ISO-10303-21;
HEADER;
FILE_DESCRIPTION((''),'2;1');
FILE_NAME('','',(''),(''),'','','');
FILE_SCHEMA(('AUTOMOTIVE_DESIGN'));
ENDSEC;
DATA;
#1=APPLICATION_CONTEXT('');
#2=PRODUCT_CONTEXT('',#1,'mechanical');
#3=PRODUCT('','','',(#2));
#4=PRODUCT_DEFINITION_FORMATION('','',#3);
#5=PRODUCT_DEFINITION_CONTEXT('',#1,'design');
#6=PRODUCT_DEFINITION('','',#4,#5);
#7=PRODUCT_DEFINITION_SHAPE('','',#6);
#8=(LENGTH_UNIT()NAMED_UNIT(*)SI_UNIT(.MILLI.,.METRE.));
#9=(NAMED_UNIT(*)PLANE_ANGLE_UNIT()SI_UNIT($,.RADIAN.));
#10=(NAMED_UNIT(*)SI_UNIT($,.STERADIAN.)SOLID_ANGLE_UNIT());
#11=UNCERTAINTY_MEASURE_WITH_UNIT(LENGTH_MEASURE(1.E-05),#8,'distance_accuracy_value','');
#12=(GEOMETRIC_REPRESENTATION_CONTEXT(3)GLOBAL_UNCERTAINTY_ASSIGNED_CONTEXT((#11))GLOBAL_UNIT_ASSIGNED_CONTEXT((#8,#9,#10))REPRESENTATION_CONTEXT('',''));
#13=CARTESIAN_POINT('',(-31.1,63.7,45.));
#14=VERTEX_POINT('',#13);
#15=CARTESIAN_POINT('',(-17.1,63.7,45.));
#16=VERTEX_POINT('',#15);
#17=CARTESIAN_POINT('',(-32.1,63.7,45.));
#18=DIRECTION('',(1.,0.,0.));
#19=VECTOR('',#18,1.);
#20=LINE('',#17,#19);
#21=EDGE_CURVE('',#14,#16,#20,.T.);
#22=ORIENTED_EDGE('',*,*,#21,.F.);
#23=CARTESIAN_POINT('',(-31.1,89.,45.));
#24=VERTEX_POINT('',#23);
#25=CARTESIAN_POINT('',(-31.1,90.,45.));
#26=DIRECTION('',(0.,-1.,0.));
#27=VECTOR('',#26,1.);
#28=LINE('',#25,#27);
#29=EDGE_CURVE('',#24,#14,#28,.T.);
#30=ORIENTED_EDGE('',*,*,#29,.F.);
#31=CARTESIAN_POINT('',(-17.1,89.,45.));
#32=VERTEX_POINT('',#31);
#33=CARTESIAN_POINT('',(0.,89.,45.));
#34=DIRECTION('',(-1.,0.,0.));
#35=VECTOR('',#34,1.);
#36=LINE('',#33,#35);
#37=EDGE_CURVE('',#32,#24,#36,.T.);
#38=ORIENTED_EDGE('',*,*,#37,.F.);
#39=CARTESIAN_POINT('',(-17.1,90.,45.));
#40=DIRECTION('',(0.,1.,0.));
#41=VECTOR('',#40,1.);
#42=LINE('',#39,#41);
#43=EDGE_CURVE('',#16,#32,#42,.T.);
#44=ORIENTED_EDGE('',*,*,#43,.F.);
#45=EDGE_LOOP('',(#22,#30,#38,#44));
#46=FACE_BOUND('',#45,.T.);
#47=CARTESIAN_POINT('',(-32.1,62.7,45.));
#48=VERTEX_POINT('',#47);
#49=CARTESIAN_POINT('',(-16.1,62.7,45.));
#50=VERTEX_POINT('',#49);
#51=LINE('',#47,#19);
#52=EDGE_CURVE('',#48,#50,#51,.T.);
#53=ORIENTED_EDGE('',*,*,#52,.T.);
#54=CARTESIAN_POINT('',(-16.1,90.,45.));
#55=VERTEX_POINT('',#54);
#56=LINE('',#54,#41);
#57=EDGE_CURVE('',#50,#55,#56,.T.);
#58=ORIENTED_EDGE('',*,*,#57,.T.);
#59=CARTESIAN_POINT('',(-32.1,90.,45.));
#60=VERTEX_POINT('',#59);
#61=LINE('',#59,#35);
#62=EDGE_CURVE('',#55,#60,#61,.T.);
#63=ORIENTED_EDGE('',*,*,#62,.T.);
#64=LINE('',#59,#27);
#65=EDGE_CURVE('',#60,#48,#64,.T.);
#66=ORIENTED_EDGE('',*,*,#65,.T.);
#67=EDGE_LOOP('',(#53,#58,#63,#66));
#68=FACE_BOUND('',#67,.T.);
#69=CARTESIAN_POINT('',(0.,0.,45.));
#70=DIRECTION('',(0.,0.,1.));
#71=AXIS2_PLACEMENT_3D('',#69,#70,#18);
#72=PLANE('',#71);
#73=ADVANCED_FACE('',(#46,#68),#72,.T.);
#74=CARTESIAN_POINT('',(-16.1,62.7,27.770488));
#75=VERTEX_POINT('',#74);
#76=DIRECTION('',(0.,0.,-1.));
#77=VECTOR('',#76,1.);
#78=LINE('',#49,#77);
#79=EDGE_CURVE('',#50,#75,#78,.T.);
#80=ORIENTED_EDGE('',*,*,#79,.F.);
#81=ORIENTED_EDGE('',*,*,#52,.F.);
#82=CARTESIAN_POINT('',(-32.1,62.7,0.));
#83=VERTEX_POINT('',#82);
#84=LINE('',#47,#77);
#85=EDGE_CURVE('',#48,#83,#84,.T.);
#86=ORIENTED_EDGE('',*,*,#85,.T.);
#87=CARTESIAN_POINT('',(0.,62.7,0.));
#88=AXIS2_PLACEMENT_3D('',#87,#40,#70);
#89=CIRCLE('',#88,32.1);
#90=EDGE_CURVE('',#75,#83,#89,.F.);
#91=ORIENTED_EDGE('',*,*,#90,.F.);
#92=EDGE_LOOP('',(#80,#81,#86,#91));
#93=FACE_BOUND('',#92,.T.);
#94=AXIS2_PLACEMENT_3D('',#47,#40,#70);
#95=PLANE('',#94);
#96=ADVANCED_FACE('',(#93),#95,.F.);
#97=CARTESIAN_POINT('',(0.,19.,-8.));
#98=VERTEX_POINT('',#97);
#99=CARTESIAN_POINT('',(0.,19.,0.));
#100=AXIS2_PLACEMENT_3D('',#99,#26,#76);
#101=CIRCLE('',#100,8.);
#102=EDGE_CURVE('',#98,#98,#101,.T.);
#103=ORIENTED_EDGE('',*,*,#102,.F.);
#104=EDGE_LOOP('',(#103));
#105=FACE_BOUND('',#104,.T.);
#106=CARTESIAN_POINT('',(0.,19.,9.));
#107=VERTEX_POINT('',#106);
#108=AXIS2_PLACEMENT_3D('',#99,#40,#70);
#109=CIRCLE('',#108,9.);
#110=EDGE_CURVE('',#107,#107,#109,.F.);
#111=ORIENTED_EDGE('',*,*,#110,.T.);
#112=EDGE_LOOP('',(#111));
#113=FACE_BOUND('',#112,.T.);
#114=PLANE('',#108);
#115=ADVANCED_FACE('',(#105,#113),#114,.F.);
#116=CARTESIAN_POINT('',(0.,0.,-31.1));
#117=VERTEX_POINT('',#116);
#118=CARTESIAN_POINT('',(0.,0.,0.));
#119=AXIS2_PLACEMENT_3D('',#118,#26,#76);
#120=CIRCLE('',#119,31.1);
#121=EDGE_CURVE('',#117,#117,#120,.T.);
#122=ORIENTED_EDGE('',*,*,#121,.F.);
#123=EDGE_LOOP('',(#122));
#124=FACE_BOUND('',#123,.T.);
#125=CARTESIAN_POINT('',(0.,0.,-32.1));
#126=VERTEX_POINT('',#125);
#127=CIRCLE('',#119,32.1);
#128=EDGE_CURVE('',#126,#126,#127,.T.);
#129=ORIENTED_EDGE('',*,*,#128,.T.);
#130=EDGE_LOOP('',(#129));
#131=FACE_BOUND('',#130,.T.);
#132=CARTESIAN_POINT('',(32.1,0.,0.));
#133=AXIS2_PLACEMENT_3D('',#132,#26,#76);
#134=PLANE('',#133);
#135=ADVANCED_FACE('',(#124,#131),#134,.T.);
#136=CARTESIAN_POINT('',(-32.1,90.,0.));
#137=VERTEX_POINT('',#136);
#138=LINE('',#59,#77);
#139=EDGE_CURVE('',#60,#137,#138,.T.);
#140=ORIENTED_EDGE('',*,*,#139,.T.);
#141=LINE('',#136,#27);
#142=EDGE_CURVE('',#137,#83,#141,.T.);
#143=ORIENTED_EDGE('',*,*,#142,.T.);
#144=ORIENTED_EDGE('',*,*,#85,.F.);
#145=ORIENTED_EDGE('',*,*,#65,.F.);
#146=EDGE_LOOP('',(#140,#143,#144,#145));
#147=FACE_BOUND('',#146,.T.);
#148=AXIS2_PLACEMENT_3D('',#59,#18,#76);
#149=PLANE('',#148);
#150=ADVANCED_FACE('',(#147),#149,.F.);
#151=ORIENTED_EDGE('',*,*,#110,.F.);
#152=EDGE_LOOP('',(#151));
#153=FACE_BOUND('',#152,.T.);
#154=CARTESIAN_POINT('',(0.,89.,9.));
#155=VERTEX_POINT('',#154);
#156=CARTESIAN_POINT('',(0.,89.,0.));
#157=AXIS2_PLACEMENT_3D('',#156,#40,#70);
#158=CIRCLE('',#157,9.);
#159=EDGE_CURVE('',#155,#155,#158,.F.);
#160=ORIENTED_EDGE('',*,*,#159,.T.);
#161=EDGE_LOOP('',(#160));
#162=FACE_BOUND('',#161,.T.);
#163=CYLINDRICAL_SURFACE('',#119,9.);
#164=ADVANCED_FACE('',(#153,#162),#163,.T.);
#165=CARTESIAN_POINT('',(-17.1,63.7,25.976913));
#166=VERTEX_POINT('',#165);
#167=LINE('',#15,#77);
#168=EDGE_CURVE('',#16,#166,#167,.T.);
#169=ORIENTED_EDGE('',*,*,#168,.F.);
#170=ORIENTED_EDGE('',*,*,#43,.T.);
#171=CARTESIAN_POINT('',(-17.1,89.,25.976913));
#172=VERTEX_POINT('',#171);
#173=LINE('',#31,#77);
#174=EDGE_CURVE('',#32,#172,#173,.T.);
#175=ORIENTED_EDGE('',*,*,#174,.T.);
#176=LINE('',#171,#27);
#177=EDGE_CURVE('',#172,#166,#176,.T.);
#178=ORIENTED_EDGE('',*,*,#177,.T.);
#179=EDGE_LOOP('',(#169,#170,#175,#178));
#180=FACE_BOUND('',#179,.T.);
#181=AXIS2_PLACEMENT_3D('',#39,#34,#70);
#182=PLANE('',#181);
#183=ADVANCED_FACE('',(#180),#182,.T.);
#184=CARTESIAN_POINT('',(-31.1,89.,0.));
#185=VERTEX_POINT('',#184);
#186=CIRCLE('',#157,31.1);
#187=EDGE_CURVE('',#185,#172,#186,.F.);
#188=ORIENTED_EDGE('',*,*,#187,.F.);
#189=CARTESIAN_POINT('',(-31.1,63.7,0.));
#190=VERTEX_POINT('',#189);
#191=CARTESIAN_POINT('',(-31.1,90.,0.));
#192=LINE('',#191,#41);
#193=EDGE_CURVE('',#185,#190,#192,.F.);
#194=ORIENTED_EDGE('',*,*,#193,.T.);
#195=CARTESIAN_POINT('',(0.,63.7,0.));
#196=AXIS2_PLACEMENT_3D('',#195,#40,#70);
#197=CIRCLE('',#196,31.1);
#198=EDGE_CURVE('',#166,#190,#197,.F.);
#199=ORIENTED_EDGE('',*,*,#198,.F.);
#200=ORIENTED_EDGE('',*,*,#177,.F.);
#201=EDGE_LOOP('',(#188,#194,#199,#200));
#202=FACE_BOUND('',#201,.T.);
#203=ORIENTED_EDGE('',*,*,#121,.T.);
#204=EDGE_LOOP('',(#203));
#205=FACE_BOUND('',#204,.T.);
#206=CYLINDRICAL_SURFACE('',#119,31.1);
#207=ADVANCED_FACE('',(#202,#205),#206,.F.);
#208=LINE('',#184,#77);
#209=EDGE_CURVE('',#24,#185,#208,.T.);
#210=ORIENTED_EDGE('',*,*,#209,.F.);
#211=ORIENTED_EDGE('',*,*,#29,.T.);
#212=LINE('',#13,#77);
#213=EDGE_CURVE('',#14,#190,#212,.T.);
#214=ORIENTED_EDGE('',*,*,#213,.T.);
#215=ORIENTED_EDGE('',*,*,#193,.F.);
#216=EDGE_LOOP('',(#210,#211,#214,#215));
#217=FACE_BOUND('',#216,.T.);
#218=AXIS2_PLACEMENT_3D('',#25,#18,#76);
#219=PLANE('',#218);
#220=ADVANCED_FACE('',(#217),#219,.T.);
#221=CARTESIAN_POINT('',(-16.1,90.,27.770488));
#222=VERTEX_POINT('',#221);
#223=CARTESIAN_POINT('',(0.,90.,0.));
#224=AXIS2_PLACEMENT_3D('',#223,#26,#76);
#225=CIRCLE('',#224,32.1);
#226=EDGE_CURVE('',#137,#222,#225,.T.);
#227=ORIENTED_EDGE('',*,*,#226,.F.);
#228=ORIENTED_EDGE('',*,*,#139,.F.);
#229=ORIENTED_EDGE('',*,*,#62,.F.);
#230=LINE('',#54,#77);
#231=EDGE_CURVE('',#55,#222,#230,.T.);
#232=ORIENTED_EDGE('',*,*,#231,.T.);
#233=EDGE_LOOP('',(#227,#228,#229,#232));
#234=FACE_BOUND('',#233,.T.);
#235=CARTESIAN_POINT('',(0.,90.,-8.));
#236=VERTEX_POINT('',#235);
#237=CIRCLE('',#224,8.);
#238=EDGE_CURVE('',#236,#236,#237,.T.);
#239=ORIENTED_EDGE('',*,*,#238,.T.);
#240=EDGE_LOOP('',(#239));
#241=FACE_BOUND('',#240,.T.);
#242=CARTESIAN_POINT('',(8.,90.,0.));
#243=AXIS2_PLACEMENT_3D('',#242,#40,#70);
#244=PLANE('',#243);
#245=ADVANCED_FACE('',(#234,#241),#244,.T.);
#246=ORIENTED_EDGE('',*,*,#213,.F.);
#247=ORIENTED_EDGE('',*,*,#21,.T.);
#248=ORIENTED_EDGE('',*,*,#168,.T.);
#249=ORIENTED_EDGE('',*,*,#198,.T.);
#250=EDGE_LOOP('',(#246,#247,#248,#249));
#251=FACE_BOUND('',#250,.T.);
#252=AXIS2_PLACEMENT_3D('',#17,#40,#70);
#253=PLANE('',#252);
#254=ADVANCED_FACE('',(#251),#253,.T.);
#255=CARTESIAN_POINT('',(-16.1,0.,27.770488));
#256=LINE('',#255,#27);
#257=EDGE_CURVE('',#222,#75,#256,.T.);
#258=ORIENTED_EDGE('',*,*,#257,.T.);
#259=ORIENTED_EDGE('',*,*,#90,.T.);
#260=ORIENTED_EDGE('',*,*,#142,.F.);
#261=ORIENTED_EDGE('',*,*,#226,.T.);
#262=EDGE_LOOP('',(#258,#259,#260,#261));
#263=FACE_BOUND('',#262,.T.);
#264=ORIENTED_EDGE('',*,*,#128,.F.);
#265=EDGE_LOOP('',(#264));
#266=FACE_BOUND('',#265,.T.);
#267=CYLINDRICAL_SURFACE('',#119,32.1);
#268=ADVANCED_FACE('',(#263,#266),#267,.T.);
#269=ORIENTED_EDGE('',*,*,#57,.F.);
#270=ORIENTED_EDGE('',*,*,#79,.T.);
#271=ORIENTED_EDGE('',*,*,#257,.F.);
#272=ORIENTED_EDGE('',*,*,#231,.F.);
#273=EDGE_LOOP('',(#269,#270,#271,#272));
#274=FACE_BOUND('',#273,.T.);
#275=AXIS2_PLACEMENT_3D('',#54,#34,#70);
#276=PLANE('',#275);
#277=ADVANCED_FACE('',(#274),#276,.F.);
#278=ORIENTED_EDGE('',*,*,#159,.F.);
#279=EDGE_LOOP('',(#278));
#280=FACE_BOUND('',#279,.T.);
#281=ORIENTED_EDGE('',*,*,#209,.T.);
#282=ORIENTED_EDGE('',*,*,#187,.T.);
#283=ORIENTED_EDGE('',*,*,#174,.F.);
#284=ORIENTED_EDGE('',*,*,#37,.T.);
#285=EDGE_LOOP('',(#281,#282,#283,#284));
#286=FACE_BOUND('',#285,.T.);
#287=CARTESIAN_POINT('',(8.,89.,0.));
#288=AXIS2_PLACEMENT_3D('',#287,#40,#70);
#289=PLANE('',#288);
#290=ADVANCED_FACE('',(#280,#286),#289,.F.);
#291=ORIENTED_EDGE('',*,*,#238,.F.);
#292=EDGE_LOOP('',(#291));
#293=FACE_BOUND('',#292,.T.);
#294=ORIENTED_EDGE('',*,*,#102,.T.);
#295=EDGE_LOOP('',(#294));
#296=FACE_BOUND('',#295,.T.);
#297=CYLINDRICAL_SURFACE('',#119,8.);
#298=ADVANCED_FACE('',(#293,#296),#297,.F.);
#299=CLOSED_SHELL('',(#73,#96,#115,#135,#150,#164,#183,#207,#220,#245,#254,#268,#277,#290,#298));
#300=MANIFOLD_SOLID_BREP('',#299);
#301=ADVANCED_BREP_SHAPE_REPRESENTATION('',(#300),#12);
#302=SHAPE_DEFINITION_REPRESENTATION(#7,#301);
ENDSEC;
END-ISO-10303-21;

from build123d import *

# Parameters (mm, degrees)
SKETCH_4_W          = 16
SKETCH_4_H          = 27.3
EXTRUDE_3_DEPTH     = 45
SHELL_2_OUTLINE_R   = 31.1
SHELL_2_OUTLINE_R_2 = 9
SHELL_2_DEPTH       = 89
SHELL_START         = 63.7
SHELL_2_2_DEPTH     = 25.3
SHELL_2_3_OUTLINE_R = 9
SHELL_2_3_DEPTH     = 19


# Read off the part's stored shape, not the designer's step: 쉘2
with BuildPart() as part:
    # 스케치3 → 회전1 (revolve)
    with BuildSketch(Plane.XY, mode=Mode.PRIVATE) as revolve_1_sk:
        Polygon((0, 19), (8, 19), (8, 90), (32.1, 90), (32.1, 0), (0, 0), align=None)
    revolve(revolve_1_sk.sketch.rotate(Axis((0, 0, 0), (0, 1, 0)), 90), axis=Axis((0, 0, 0), (0, 1, 0)))

    # 스케치4 → 보스-돌출3 (add)
    with BuildSketch(Plane.XY):
        with Locations((-24.1, 76.35)):
            Rectangle(SKETCH_4_W, SKETCH_4_H)
    extrude(amount=EXTRUDE_3_DEPTH)

    # 쉘2 outline → 쉘2 (cut)
    with BuildSketch(Plane(origin=(0, 0, 0), x_dir=(1, 0, 0), z_dir=(0, 1, 0))):
        Circle(SHELL_2_OUTLINE_R)
        Circle(SHELL_2_OUTLINE_R_2, mode=Mode.SUBTRACT)
    extrude(amount=SHELL_2_DEPTH, mode=Mode.SUBTRACT)

    # Shell 2 2 outline → Shell 2 2 (cut)
    with BuildSketch(Plane(origin=(0, 0, 0), x_dir=(1, 0, 0), z_dir=(0, 1, 0)).offset(SHELL_START)):
        with BuildLine():
            ThreePointArc((-17.1, -25.976912827), (-27.377180278, -14.754660281), (-31.1, 0))
            Line((-31.1, 0), (-31.1, -45))
            Line((-31.1, -45), (-17.1, -45))
            Line((-17.1, -45), (-17.1, -25.976912827))
        make_face()
    extrude(amount=SHELL_2_2_DEPTH, mode=Mode.SUBTRACT)

    # Shell 2 3 outline → Shell 2 3 (cut)
    with BuildSketch(Plane(origin=(0, 0, 0), x_dir=(1, 0, 0), z_dir=(0, 1, 0))):
        Circle(SHELL_2_3_OUTLINE_R)
    extrude(amount=SHELL_2_3_DEPTH, mode=Mode.SUBTRACT)


solid = part.part
